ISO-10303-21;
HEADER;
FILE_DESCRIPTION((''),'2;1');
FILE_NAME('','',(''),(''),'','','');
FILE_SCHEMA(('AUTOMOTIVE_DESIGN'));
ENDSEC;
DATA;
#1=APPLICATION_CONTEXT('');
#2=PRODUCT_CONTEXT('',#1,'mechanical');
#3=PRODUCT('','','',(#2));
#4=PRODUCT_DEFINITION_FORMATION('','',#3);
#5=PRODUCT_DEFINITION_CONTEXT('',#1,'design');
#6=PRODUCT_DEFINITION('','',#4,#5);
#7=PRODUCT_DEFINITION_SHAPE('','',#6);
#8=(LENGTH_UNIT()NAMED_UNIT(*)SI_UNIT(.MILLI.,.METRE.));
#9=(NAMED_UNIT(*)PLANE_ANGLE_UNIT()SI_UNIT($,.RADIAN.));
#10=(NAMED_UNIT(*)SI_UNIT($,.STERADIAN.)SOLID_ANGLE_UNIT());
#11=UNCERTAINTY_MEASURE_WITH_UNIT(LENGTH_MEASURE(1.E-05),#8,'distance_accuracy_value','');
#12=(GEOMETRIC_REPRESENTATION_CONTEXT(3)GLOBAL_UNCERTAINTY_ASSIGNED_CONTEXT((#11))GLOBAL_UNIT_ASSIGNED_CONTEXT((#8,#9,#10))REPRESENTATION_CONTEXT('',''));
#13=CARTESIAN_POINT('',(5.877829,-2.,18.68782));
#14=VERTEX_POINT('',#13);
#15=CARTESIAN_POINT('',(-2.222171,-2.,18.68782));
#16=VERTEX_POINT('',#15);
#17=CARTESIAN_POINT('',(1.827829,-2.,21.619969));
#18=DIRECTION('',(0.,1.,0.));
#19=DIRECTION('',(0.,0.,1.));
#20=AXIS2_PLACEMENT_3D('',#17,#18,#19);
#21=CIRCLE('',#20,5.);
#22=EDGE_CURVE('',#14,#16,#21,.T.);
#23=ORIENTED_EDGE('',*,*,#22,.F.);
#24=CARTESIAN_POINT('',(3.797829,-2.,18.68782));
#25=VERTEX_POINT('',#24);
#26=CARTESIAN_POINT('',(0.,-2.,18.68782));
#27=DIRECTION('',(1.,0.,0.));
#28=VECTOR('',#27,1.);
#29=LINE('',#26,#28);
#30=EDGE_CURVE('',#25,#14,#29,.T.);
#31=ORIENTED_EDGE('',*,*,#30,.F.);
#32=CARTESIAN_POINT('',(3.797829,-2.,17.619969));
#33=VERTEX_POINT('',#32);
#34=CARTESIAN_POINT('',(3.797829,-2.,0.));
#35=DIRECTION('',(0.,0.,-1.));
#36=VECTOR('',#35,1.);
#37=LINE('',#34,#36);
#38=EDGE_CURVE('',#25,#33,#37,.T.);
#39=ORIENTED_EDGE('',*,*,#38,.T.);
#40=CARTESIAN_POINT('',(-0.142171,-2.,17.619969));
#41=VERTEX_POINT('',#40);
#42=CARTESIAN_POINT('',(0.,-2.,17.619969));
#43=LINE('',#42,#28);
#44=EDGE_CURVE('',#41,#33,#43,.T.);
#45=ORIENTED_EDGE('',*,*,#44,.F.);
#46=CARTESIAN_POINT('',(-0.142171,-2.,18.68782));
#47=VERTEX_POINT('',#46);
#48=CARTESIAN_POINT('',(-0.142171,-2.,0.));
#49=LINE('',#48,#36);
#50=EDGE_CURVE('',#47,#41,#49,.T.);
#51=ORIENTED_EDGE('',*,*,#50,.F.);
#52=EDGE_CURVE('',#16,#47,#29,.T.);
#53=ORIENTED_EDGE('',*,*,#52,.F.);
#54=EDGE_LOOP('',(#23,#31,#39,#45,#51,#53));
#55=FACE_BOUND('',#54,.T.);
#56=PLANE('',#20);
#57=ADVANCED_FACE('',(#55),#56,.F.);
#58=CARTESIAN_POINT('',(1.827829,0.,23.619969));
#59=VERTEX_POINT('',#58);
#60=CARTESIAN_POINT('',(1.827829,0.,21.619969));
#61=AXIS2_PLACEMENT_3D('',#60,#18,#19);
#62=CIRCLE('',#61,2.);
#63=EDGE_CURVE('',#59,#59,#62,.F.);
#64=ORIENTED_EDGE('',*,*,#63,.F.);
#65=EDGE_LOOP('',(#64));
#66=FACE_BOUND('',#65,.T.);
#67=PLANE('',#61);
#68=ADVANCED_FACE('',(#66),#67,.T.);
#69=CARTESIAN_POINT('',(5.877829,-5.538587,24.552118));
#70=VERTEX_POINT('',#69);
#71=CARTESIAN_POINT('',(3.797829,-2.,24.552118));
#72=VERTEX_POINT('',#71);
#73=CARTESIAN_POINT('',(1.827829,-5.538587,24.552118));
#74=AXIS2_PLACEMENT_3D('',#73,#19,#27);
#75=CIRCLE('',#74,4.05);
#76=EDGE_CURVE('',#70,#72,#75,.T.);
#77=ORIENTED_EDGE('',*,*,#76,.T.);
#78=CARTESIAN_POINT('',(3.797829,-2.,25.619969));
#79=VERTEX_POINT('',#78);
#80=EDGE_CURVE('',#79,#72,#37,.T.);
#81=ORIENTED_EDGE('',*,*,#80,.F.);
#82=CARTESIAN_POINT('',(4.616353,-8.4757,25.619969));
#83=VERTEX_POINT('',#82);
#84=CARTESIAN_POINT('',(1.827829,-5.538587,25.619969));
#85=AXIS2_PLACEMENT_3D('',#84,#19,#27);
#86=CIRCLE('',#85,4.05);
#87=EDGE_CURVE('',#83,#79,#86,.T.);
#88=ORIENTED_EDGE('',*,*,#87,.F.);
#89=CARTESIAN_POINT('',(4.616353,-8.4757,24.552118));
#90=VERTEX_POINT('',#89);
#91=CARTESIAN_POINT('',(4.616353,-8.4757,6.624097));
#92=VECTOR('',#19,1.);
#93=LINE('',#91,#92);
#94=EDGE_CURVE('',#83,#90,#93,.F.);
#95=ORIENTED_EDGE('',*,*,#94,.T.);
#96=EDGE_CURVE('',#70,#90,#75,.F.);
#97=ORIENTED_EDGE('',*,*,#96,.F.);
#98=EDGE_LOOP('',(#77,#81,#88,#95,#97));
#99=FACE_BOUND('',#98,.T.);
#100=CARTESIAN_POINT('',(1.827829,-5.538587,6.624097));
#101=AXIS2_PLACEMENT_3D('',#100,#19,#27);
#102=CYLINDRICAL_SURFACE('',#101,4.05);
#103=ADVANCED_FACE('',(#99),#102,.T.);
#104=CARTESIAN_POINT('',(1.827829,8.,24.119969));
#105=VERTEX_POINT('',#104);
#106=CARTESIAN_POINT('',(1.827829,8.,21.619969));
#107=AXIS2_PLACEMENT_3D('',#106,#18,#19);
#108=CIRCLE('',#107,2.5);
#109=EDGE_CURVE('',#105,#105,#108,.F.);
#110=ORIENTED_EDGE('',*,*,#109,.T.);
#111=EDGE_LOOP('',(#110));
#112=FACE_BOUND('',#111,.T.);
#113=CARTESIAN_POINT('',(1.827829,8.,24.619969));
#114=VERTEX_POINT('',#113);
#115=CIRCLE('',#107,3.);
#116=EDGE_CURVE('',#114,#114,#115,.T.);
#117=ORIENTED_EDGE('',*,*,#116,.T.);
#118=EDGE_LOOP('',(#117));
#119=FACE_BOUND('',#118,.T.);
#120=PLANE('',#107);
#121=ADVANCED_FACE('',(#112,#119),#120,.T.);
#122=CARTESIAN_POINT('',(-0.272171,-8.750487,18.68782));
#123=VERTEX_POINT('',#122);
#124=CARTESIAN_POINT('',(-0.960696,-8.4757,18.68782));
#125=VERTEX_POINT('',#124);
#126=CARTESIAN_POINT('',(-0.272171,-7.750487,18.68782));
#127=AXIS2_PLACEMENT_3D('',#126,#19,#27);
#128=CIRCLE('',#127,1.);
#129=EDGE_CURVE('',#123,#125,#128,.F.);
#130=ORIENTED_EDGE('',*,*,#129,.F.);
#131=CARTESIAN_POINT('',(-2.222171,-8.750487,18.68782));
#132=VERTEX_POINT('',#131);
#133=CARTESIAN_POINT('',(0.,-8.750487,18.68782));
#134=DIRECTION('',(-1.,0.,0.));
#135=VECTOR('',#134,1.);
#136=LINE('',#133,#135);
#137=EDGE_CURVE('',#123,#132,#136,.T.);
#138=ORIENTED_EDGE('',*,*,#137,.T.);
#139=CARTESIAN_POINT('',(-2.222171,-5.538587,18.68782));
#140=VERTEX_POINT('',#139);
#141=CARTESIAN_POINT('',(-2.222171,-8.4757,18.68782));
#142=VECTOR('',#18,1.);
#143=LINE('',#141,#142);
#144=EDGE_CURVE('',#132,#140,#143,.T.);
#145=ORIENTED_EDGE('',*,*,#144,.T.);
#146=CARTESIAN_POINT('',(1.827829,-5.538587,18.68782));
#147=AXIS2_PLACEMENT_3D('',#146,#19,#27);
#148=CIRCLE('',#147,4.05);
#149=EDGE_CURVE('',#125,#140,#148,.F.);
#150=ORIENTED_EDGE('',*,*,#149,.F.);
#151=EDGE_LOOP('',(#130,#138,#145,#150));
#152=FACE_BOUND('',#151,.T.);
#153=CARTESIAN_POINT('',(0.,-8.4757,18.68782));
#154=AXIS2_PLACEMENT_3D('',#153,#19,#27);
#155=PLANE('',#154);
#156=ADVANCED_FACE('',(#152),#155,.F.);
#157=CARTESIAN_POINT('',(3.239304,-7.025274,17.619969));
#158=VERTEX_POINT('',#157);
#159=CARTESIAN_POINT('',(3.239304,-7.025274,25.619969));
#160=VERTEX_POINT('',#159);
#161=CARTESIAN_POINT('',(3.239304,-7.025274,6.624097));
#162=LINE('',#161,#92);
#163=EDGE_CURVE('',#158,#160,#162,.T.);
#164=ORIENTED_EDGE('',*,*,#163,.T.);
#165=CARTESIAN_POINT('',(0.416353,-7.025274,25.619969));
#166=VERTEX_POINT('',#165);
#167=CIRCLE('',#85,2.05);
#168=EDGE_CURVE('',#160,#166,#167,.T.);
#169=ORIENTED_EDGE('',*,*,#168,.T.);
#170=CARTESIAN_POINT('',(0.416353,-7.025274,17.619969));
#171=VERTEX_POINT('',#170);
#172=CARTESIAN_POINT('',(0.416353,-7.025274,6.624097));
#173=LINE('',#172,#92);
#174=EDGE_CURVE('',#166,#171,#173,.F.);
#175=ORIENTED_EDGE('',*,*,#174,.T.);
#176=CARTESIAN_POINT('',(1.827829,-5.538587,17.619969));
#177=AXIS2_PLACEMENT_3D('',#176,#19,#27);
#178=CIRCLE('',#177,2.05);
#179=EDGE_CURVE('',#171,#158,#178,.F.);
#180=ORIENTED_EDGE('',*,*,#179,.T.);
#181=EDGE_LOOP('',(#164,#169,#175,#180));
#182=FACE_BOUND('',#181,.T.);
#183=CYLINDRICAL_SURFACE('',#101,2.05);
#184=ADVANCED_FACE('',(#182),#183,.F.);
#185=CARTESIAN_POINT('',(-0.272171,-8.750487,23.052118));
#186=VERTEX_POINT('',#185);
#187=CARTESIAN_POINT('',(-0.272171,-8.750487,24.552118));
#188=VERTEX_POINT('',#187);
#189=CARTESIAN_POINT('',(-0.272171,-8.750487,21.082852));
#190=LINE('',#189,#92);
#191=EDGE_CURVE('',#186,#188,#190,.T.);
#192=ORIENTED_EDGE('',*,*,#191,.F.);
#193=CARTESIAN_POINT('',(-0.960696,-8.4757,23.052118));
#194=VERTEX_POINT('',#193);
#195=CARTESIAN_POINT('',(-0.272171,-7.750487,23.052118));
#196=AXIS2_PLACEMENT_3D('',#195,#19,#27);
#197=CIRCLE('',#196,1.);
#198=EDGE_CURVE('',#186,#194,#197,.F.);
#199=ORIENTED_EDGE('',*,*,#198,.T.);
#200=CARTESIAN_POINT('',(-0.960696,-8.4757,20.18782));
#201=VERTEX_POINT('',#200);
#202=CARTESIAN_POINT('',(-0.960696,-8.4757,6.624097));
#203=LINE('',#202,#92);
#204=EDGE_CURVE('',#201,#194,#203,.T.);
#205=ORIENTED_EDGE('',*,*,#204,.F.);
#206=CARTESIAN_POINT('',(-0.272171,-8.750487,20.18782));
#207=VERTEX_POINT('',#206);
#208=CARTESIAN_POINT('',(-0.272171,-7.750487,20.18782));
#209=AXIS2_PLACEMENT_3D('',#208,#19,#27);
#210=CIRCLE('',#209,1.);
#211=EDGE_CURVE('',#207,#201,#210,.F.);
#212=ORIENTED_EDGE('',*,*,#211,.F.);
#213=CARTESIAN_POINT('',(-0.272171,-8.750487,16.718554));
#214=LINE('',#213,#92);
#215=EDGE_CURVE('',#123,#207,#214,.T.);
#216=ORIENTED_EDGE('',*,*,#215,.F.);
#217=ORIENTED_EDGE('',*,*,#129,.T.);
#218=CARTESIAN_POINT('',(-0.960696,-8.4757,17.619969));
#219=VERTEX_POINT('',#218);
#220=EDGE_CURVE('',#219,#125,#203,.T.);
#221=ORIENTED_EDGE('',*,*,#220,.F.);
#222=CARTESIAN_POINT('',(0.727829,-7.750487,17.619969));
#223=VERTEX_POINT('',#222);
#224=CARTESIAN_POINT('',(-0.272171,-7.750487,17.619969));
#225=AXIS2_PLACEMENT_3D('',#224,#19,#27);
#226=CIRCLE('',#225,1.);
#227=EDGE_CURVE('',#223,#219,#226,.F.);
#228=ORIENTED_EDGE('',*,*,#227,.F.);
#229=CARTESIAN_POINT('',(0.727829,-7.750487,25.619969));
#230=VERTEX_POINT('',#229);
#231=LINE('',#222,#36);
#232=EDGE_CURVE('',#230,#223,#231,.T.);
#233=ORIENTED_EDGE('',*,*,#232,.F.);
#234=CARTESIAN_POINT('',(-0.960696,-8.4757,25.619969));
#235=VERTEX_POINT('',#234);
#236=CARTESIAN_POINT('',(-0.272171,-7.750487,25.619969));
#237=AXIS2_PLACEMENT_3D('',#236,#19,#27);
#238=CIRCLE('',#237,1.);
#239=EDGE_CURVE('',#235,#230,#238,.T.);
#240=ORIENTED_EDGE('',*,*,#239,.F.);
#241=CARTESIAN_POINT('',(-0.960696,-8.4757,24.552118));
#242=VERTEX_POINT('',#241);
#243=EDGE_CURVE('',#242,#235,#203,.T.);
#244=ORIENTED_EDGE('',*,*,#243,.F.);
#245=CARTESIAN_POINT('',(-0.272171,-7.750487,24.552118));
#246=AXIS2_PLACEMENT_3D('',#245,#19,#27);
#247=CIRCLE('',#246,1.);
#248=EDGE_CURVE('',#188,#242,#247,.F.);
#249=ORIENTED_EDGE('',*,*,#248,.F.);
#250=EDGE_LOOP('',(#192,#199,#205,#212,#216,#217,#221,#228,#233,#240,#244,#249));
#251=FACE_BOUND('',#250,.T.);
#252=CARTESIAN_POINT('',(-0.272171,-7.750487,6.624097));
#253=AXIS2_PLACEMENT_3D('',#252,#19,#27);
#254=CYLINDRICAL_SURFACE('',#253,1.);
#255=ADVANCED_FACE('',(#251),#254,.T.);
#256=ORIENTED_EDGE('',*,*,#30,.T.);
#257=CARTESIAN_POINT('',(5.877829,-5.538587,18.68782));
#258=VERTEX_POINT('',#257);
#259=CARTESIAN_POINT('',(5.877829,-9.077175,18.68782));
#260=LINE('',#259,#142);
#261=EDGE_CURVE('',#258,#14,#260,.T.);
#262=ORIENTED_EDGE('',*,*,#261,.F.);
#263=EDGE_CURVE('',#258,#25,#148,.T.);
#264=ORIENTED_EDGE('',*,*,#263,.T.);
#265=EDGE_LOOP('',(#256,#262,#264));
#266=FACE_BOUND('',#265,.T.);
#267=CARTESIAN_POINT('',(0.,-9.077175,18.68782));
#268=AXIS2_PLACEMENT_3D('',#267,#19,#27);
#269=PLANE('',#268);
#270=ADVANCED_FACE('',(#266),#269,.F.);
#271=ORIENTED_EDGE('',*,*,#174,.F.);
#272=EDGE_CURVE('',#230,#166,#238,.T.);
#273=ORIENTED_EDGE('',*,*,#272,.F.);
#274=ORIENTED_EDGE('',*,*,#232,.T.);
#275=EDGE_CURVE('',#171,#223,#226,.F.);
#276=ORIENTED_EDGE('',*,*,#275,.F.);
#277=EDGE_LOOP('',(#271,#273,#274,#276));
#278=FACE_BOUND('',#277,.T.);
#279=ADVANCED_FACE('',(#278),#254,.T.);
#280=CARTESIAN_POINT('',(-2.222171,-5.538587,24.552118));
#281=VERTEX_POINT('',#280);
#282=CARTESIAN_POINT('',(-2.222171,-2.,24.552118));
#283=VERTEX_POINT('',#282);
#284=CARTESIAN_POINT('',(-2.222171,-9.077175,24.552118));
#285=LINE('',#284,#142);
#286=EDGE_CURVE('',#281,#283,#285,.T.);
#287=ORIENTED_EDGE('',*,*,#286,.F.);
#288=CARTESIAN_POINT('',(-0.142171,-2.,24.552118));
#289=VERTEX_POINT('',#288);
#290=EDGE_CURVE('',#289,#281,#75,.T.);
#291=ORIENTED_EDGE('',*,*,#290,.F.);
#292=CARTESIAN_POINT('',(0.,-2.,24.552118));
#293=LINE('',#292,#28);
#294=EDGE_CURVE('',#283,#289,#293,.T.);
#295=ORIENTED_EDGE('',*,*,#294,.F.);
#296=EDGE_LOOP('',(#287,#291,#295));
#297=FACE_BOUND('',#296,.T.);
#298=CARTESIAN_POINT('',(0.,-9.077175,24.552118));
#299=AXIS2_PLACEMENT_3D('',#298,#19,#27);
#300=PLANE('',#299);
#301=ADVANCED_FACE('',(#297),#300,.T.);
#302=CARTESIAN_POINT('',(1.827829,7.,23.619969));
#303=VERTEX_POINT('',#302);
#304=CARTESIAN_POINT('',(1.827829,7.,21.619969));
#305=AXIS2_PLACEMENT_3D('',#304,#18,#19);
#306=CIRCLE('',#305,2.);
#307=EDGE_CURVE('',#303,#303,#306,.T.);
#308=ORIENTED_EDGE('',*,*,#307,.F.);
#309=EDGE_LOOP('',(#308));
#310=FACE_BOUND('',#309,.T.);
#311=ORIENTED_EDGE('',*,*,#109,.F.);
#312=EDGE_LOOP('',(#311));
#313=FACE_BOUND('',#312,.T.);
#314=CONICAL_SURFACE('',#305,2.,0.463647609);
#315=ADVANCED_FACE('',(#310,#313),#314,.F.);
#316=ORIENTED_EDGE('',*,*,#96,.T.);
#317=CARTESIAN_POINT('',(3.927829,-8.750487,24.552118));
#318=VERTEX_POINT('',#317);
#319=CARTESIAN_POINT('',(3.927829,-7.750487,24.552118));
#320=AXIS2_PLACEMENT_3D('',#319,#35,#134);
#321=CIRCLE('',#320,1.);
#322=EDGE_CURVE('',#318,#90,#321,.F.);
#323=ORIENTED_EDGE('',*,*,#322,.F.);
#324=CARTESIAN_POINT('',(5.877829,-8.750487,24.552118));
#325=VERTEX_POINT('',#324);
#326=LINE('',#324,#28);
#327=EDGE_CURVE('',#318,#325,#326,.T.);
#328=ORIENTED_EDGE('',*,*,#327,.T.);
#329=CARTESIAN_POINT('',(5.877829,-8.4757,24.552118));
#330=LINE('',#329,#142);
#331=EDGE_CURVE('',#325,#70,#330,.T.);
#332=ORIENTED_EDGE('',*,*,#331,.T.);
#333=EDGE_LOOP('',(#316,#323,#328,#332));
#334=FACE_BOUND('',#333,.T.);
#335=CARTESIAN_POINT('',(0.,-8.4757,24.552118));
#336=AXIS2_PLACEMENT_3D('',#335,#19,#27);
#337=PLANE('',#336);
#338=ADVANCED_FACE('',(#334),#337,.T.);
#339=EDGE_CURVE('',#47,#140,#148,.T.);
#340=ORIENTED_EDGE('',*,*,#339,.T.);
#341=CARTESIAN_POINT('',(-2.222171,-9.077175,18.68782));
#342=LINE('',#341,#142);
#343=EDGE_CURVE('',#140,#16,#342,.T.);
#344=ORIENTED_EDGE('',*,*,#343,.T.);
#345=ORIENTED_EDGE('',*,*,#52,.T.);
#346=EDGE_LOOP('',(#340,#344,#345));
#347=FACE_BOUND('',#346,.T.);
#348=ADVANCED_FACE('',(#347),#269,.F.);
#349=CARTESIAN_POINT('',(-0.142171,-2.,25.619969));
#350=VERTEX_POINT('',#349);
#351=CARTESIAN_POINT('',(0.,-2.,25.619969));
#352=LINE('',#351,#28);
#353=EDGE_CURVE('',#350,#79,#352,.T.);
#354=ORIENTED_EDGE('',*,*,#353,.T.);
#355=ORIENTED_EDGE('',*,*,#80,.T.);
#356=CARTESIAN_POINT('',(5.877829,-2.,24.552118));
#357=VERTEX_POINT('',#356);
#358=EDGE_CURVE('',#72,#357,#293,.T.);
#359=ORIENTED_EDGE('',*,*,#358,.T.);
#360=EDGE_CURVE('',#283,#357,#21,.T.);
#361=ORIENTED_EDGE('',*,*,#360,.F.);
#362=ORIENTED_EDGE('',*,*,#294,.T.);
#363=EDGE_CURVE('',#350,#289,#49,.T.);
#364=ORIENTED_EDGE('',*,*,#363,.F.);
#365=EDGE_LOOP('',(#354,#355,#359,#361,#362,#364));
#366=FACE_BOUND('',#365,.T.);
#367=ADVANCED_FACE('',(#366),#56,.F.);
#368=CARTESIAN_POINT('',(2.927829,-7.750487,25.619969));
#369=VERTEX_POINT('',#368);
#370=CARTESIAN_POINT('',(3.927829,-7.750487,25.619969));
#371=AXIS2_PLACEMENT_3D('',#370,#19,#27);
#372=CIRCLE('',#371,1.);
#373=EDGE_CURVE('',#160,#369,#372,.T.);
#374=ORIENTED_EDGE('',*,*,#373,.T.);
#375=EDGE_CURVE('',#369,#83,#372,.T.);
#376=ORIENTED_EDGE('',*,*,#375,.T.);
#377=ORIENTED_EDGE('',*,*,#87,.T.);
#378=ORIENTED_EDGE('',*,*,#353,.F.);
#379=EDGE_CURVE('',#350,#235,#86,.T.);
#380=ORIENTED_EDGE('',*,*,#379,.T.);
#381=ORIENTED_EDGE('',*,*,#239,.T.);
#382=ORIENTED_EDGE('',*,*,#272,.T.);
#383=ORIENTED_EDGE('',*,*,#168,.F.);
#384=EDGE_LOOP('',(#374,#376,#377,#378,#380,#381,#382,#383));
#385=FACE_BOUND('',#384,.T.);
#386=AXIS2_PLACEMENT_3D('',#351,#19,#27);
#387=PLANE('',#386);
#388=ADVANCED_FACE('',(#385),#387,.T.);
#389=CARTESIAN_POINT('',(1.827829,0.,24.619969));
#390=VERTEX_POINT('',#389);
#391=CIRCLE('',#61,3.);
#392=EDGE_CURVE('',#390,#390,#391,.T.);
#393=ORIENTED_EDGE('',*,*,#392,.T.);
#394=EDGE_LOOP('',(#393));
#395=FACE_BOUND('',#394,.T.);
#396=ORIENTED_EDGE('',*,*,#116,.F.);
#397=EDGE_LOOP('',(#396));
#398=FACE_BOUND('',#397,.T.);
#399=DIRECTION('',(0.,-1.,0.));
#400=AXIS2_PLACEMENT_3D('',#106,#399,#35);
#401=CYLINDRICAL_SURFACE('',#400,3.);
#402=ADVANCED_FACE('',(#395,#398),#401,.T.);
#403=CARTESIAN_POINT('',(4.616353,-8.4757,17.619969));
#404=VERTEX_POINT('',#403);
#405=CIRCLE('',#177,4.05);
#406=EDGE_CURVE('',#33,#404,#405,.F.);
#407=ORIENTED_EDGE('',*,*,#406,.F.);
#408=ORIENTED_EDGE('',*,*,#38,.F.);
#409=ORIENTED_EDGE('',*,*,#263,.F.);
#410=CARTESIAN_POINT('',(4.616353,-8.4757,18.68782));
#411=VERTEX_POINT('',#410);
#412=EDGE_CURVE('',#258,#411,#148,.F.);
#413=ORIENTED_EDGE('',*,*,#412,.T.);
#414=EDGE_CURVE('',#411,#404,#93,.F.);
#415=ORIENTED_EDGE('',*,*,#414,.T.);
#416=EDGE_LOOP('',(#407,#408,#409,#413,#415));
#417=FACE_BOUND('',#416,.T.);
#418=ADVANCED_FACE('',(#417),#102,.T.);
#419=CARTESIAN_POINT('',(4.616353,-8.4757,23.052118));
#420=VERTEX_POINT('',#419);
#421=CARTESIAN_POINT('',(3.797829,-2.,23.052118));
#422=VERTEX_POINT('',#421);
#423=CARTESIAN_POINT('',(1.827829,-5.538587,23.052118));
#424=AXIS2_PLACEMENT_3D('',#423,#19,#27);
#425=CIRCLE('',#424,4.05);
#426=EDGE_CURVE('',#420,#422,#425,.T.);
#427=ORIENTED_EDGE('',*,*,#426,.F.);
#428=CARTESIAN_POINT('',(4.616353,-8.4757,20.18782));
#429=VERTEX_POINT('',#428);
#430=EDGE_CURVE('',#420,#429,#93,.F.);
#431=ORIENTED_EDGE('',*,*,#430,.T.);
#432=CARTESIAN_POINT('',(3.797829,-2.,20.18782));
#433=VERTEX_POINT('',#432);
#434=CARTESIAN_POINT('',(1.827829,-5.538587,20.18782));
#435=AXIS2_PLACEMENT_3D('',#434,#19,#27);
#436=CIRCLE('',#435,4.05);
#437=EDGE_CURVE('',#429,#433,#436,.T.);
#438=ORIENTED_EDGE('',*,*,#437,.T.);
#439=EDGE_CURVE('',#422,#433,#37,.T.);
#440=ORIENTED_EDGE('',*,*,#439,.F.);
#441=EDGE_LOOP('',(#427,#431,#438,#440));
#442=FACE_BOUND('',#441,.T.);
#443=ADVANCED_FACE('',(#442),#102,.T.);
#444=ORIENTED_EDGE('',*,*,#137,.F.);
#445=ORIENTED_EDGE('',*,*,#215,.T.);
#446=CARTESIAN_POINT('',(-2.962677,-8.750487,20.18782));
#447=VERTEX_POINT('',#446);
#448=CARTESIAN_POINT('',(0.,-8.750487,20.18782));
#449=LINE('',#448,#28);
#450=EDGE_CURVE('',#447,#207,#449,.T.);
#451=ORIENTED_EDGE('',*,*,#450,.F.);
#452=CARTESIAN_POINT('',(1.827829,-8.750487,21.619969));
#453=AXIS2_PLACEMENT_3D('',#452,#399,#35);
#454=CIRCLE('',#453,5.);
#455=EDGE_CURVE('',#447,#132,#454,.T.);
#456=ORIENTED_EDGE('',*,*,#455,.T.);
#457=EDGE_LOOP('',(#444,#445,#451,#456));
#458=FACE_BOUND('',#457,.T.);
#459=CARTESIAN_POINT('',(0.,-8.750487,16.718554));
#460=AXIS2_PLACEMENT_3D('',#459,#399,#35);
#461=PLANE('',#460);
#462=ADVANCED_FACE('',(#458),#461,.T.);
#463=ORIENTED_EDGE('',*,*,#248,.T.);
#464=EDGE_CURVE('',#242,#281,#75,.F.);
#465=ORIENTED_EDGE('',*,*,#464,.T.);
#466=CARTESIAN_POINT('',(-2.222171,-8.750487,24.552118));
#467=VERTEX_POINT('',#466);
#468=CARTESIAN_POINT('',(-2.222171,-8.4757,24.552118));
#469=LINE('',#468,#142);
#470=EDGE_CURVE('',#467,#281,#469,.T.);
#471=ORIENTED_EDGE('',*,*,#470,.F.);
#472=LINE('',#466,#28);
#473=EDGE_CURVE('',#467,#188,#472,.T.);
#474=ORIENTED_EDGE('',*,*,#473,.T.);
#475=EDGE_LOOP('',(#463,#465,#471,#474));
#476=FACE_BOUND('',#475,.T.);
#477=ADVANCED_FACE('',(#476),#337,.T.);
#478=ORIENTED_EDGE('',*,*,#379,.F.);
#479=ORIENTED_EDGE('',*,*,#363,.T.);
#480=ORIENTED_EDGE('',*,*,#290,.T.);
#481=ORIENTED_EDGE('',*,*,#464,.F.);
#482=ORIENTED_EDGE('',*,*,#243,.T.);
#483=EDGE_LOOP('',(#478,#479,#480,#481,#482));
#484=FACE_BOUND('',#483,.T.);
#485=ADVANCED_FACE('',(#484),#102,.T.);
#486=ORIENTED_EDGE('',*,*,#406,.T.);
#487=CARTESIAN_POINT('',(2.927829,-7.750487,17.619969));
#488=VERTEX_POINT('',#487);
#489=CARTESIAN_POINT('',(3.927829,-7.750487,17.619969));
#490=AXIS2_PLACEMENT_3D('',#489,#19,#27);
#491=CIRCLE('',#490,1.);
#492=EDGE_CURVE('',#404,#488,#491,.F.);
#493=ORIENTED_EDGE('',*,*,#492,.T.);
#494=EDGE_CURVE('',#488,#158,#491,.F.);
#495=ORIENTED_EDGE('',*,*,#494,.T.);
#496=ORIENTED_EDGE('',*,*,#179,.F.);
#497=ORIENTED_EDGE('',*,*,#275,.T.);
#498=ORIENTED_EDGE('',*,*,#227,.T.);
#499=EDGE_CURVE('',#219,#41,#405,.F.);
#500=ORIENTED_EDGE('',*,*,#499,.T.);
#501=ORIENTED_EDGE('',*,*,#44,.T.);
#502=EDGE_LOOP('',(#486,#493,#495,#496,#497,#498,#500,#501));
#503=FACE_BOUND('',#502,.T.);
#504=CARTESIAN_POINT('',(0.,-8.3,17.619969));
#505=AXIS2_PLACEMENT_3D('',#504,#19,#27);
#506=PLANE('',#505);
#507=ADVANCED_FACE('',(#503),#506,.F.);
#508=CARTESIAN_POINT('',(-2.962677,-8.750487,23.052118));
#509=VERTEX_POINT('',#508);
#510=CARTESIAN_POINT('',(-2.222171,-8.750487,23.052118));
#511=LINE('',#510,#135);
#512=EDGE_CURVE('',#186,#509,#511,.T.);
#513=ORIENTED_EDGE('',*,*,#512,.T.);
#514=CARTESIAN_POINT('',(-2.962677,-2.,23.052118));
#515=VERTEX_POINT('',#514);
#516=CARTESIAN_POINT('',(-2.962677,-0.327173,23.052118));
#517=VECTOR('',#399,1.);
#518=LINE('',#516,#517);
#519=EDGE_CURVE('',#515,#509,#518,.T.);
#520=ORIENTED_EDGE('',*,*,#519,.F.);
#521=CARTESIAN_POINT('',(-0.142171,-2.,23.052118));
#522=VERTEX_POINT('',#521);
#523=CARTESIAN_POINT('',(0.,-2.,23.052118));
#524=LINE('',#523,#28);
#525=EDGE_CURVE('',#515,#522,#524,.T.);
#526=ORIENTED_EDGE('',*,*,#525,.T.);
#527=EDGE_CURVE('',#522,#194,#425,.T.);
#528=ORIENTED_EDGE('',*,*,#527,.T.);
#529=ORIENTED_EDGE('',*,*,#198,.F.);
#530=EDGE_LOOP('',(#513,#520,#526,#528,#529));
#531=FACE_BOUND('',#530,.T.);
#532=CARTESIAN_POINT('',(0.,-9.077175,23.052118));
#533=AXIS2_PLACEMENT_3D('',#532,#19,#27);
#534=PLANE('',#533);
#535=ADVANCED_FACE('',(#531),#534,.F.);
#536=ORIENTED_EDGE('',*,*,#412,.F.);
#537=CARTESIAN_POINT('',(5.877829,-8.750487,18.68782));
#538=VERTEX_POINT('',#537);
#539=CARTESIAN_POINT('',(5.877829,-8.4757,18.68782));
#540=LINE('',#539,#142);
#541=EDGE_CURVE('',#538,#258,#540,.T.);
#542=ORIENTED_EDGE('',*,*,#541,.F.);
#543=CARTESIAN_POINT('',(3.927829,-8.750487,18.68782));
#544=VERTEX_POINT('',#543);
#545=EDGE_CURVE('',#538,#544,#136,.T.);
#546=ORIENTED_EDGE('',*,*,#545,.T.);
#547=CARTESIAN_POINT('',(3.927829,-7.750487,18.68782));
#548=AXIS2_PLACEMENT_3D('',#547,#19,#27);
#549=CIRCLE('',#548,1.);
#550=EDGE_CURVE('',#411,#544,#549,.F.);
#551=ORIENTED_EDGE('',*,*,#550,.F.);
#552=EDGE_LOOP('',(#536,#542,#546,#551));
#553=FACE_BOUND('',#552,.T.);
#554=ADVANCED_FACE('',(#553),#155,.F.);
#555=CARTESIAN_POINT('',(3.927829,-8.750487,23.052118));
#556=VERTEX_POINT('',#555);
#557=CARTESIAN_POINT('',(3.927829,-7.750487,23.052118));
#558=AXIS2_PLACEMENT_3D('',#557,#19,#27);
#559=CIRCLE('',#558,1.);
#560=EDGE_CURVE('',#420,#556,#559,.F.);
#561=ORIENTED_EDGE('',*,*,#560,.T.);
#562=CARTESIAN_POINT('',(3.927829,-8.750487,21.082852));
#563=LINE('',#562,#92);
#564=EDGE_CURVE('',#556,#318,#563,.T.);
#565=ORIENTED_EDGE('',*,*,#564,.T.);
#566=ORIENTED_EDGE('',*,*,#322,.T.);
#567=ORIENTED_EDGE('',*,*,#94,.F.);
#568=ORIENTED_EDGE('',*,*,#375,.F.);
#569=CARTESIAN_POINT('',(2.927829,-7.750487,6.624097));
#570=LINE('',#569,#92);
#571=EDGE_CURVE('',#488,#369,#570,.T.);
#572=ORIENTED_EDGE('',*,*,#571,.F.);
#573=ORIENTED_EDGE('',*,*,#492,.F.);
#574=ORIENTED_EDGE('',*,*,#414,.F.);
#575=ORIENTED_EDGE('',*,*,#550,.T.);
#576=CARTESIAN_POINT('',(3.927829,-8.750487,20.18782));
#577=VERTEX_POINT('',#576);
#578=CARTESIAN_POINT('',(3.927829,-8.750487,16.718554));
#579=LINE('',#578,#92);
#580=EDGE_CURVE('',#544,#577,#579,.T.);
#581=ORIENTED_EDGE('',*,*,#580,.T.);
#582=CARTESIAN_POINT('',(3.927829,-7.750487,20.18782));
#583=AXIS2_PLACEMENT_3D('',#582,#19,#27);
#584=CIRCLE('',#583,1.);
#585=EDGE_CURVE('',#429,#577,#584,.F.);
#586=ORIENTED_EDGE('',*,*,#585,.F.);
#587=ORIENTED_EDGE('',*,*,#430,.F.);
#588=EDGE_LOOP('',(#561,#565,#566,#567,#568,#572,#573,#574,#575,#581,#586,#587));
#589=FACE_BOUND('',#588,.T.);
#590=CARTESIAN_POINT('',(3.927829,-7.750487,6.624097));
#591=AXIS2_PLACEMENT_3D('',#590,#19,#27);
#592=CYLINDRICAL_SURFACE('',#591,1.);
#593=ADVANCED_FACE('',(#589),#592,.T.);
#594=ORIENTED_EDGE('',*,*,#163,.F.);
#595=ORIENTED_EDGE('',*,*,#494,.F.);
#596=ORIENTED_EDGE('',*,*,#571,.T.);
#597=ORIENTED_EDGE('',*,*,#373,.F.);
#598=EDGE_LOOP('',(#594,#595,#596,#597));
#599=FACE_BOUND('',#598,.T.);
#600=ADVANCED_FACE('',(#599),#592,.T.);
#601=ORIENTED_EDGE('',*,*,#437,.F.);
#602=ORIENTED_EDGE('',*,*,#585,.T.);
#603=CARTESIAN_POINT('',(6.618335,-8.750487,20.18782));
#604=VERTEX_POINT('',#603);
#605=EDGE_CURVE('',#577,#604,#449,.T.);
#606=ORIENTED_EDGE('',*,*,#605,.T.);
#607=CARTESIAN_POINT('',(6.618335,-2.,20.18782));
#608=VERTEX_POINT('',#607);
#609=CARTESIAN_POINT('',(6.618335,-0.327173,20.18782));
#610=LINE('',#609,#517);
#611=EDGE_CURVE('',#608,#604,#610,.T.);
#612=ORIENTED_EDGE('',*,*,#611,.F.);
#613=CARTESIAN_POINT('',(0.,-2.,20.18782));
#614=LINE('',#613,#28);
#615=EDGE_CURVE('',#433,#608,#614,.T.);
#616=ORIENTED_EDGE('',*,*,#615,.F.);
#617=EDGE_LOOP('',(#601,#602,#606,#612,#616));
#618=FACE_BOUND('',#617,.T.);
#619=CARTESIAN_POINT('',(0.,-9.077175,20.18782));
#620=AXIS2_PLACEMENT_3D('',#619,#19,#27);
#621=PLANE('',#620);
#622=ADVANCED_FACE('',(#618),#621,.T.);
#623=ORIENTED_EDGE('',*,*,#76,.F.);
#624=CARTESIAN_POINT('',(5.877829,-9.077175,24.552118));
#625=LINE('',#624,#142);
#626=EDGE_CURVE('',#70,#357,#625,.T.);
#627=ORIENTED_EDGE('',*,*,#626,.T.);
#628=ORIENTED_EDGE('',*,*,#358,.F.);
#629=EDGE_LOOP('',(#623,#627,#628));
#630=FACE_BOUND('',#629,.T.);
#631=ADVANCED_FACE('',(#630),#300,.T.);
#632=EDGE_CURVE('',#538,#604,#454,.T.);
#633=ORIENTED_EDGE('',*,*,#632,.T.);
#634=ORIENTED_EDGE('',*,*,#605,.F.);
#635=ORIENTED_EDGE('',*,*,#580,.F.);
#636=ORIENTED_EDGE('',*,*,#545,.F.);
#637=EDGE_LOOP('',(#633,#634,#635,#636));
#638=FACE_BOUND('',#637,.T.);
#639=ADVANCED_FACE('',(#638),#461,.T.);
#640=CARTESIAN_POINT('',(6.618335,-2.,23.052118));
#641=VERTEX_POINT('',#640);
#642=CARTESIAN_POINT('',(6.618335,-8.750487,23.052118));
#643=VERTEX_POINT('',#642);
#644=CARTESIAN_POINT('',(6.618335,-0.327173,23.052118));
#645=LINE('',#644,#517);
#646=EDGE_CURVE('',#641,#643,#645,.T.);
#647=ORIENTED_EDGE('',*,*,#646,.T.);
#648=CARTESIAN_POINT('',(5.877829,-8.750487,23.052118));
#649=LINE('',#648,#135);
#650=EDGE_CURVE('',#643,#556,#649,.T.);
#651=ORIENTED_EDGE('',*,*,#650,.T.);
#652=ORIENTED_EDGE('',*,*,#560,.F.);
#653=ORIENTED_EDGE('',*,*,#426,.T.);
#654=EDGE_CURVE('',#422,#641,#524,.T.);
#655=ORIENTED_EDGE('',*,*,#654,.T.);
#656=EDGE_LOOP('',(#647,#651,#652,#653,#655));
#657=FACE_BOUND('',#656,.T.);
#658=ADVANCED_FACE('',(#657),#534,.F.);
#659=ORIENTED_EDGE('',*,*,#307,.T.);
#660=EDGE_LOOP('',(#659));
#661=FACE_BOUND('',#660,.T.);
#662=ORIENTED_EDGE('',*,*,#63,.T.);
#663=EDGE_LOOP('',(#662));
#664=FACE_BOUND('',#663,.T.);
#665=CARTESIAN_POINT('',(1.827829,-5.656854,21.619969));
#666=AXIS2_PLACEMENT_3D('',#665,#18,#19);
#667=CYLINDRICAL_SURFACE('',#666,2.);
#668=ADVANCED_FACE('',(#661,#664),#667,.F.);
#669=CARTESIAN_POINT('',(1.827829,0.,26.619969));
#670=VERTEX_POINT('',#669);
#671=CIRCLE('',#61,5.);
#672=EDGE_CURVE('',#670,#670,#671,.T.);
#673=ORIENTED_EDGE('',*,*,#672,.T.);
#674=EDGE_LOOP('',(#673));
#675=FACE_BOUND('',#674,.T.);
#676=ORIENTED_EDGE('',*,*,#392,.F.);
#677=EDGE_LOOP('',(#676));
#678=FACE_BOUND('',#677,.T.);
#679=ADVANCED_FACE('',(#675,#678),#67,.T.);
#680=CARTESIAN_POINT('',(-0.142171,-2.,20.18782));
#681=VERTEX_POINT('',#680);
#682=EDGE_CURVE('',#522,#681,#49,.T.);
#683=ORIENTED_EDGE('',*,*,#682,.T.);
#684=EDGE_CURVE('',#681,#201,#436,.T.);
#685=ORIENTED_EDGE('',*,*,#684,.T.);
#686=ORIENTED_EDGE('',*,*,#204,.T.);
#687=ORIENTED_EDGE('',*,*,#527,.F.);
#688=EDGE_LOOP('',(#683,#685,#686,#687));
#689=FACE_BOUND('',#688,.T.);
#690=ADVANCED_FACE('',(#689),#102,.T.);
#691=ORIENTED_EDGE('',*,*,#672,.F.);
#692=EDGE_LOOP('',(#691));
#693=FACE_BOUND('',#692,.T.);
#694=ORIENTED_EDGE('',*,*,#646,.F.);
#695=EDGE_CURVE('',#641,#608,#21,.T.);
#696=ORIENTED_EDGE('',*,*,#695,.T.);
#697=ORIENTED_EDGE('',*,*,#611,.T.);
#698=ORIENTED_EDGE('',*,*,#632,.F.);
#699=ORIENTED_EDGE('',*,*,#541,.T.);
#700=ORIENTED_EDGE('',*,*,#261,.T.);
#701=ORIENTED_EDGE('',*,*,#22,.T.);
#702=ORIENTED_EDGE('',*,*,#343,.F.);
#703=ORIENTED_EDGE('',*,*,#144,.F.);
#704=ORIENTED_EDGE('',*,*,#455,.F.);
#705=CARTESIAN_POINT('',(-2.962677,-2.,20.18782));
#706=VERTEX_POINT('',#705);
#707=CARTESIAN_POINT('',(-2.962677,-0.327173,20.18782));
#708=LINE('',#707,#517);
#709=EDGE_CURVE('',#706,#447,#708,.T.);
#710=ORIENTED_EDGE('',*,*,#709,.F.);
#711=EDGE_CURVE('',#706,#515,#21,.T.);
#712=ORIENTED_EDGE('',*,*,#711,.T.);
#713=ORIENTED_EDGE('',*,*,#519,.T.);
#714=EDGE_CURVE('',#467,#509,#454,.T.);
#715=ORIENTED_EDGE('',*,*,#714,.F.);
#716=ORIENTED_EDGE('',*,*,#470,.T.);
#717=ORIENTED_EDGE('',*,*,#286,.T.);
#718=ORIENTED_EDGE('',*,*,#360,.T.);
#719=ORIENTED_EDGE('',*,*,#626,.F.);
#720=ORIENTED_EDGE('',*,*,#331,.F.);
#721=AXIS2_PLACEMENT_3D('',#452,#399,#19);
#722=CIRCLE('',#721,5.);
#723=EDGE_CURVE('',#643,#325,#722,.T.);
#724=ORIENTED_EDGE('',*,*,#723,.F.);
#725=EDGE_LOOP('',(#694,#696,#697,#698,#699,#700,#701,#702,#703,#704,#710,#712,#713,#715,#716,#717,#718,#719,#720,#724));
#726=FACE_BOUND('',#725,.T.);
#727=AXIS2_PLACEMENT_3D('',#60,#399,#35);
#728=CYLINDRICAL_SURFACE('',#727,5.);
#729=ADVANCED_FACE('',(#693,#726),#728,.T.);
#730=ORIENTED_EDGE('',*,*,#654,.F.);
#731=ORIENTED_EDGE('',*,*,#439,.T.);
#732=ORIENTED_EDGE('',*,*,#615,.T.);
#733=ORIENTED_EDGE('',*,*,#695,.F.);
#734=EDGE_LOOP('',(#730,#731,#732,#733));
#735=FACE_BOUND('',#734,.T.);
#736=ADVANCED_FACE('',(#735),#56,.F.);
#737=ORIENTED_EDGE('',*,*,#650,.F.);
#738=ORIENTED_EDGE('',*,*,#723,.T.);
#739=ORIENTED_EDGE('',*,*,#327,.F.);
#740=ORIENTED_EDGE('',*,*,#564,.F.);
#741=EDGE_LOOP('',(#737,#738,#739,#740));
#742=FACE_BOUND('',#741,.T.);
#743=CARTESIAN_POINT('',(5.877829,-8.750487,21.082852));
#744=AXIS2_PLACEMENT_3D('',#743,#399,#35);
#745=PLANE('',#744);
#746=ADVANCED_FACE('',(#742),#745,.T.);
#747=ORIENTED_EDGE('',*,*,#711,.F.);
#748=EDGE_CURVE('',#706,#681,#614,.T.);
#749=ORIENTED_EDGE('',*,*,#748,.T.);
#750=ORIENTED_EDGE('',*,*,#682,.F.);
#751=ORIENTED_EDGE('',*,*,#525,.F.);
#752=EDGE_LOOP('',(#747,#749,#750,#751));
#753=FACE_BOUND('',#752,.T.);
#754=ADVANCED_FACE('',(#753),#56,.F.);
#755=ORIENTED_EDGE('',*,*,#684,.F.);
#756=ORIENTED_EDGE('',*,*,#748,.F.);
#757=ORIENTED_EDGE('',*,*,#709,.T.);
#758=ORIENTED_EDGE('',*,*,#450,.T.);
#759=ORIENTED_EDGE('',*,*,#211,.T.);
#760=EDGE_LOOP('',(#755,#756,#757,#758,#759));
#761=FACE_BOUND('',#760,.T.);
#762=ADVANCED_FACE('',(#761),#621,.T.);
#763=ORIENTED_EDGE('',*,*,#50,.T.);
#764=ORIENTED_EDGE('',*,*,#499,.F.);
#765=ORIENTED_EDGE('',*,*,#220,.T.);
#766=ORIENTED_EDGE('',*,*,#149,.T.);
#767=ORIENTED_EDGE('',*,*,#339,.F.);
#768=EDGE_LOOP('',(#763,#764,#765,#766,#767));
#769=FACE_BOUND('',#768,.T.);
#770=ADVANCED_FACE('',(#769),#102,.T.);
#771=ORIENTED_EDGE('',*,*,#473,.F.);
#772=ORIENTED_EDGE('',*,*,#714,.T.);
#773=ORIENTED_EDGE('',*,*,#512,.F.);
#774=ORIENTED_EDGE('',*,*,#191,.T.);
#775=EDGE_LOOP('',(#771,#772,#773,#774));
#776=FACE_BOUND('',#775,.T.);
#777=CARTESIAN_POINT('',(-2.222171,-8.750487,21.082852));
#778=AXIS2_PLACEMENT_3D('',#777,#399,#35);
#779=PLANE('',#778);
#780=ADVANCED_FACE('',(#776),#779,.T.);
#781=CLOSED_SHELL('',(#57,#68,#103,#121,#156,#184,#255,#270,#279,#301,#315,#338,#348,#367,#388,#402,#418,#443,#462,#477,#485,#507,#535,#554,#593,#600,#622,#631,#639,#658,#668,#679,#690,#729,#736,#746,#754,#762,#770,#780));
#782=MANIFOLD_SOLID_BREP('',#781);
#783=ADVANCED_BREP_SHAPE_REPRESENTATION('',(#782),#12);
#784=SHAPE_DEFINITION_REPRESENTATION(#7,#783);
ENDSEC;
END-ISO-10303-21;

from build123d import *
from build123d.topology import SkipClean

# Parameters (mm, degrees)
BOSS_EXTRUDE9_DEPTH       = 5.6
BOSS_EXTRUDE9_DEPTH_BACK  = 2
SKETCH16_W                = 8
SKETCH16_H                = 3.5
BOSS_EXTRUDE11_DEPTH      = 8
CHAMFER2_SIZE             = 1.5
SKETCH17_W                = 3.94
SKETCH17_H                = 8
BOSS_EXTRUDE12_DEPTH      = 6.3
CUT_EXTRUDE2_START        = -5.6
CUT_EXTRUDE2_DEPTH        = 3.6
SKETCH21_R                = 1.5
BOSS_EXTRUDE14_DEPTH      = 3.6
CHAMFER4_SIZE             = 1
CUT_EXTRUDE3_DEPTH        = 3.6
SPLIT1_START              = -2
SPLIT1_DEPTH              = 7.6
SKETCH22_R                = 5
BOSS_EXTRUDE15_DEPTH      = 2
SKETCH23_R                = 3
BOSS_EXTRUDE16_DEPTH      = 8
CUT_EXTRUDE4_DEPTH        = 32.952026383
CUT_EXTRUDE4_DEPTH_BACK   = 8
SKETCH24_R                = 2
CHAMFER5_SIZE             = 0.5
CHAMFER5_SIZE2            = 1
BOSS_EXTRUDE17_DEPTH      = 8
CUT_EXTRUDE6_DEPTH        = 15.719504629
CUT_EXTRUDE6_DEPTH_BACK   = 15.719504629
FILLET2_R                 = 1
BOSS_EXTRUDE18_REACH      = 31.245
BOSS_EXTRUDE18_END_RADIUS = 4.05
SKETCH27_W                = 2.08
SKETCH27_H                = 1.5
BOSS_EXTRUDE19_START      = 3.538587
SKETCH27_3_W              = 2.08
SKETCH27_3_H              = 1.5
BOSS_EXTRUDE19_DEPTH      = 2.937113
CUT_EXTRUDE7_DEPTH        = 15.289597343
CUT_EXTRUDE7_DEPTH_BACK   = 15.289597343
SKETCH29_W                = 1.95
SKETCH29_H                = 0.274787005
BOSS_EXTRUDE20_DEPTH      = 1.5
BOSS_EXTRUDE21_START      = -4.364299
SKETCH29_3_W              = 1.95
SKETCH29_3_H              = 0.274787005
BOSS_EXTRUDE21_DEPTH      = 1.5
BOSS_EXTRUDE22_DEPTH      = 6.750486925


# Read off the part's stored shape, not the designer's step: Split1
# Some blends are built 0.0001 mm under size
with BuildPart() as part:
    # Sketch14 → Boss-Extrude9 (new, two sides: drawn at the far end of the back side and taken through both)
    with BuildSketch(Plane(origin=(0, 0, 0), x_dir=(1, 0, 0), z_dir=(0, 1, 0)).offset(-BOSS_EXTRUDE9_DEPTH_BACK)):
        with BuildLine():
            Line((-4.172171186, -20.619968889), (-4.172171186, -25.619968889))
            Line((-4.172171186, -25.619968889), (7.827828814, -25.619968889))
            Line((7.827828814, -25.619968889), (7.827828814, -20.619968889))
            ThreePointArc((7.827828814, -20.619968889), (1.827828814, -14.619968889), (-4.172171186, -20.619968889))
        make_face()
    extrude(amount=BOSS_EXTRUDE9_DEPTH + BOSS_EXTRUDE9_DEPTH_BACK)

    # Sketch16 → Boss-Extrude11 (add)
    with BuildSketch(Plane.XY.offset(25.619968889)):
        with Locations((1.827828814, 1.75)):
            Rectangle(SKETCH16_W, SKETCH16_H)
    extrude(amount=BOSS_EXTRUDE11_DEPTH)

    # Chamfer2
    chamfer2_edges = [part.edges().sort_by_distance(p)[0] for p in [
        (1.827828814, -2, 14.619968889),
        (7.827828814, 5.6, 23.119968889),
        (1.827828814, 5.6, 14.619968889),
        (-4.172171186, -2, 23.119968889),
        (-4.172171186, 5.6, 23.119968889),
        (7.827828814, -2, 23.119968889),
    ]]
    chamfer(chamfer2_edges, length=CHAMFER2_SIZE)

    # Sketch17 → Boss-Extrude12 (add)
    with BuildSketch(Plane.XZ.offset(2)):
        with Locations((1.827828814, 21.619968889)):
            Rectangle(SKETCH17_W, SKETCH17_H)
    extrude(amount=BOSS_EXTRUDE12_DEPTH)

    # Sketch20 → Cut-Extrude2 (cut)
    with BuildSketch(Plane(origin=(0, 5.6, 0), x_dir=(1, 0, 0), z_dir=(0, 1, 0)).offset(CUT_EXTRUDE2_START)):
        with BuildLine():
            Line((7.827828814, -20.619968889), (-4.172171186, -20.619968889))
            ThreePointArc((-4.172171186, -20.619968889), (1.827828814, -14.619968889), (7.827828814, -20.619968889))
        make_face()
    extrude(amount=CUT_EXTRUDE2_DEPTH, mode=Mode.SUBTRACT)

    # Sketch21 → Boss-Extrude14 (add)
    with BuildSketch(Plane(origin=(0, 0, 0), x_dir=(1, 0, 0), z_dir=(0, 1, 0))):
        with BuildLine():
            ThreePointArc((7.827828814, -20.619968889), (7.63955943, -19.128732072), (7.086566399, -17.731080001))
            ThreePointArc((7.086566399, -17.731080001), (6.279209969, -19.350325806), (4.990106474, -20.619968889))
            Line((4.990106474, -20.619968889), (7.827828814, -20.619968889))
        make_face()
        with BuildLine():
            ThreePointArc((-1.334448847, -20.619968889), (-2.623552342, -19.350325806), (-3.430908771, -17.731080001))
            ThreePointArc((-3.430908771, -17.731080001), (-3.983901803, -19.128732072), (-4.172171186, -20.619968889))
            Line((-4.172171186, -20.619968889), (-1.334448847, -20.619968889))
        make_face()
        with Locations(Location((1.827828814, -16.119968889, 0), (0, 0, 90.000763944))):
            Circle(SKETCH21_R)
    extrude(amount=BOSS_EXTRUDE14_DEPTH)

    # Chamfer4
    # the kernel refuses this chamfer: 1 mm, written as the material it adds along each edge
    with BuildSketch(Plane(origin=(1.827828814, 3.6, 16.119968889), x_dir=(-1.3333338100422289e-05, 0, -0.999999999911111), z_dir=(0.999999999911111, 0, -1.3333338100422289e-05))) as chamfer4_piece_1_section:
        Polygon((1.5, -CHAMFER4_SIZE), (1.5 + CHAMFER4_SIZE, 0), (1.5, 0), align=None)
    chamfer4_piece_1 = revolve(axis=Axis((1.827828814, 3.6, 16.119968889), (0, 1, 0)), mode=Mode.PRIVATE)
    chamfer4_piece_1 = chamfer4_piece_1 & Plane(origin=(1.827828814, 3.111670507, 20.619968889), x_dir=(1, 0, 0), z_dir=(0, -1, 0)) * Cylinder(6, 10, mode=Mode.PRIVATE)
    add(chamfer4_piece_1)
    with BuildSketch(Plane(origin=(1.827828814, 0, 16.119968889), x_dir=(-1.3333338100422289e-05, 0, -0.999999999911111), z_dir=(0.999999999911111, 0, -1.3333338100422289e-05))) as chamfer4_piece_2_section:
        Polygon((1.5 + CHAMFER4_SIZE, 0), (1.5, CHAMFER4_SIZE), (1.5, 0), align=None)
    chamfer4_piece_2 = revolve(axis=Axis((1.827828814, 0, 16.119968889), (0, 1, 0)), mode=Mode.PRIVATE)
    chamfer4_piece_2 = chamfer4_piece_2 & Plane(origin=(1.827828814, 0.488329493, 20.619968889), x_dir=(1, 0, 0), z_dir=(0, -1, 0)) * Cylinder(6, 10, mode=Mode.PRIVATE)
    add(chamfer4_piece_2)

    # Sketch21<3> → Cut-Extrude3 (cut)
    with BuildSketch(Plane(origin=(0, 0, 0), x_dir=(1, 0, 0), z_dir=(0, 1, 0))):
        with BuildLine():
            Line((4.990106474, -20.619968889), (-1.334448847, -20.619968889))
            ThreePointArc((-1.334448847, -20.619968889), (1.827828814, -21.619968889), (4.990106474, -20.619968889))
        make_face()
    extrude(amount=CUT_EXTRUDE3_DEPTH, mode=Mode.SUBTRACT)

    # Split1 outline → Split1 (cut)
    with BuildSketch(Plane(origin=(0, 0, 0), x_dir=(1, 0, 0), z_dir=(0, 1, 0)).offset(SPLIT1_START)):
        with BuildLine():
            Line((7.827828814, -25.619968889), (7.827828814, -20.619968889))
            ThreePointArc((7.827828814, -20.619968889), (1.827828814, -14.619968889), (-4.172171186, -20.619968889))
            Line((-4.172171186, -20.619968889), (-4.172171186, -25.619968889))
            Line((-4.172171186, -25.619968889), (-2.172171186, -25.619968889))
            Line((-2.172171186, -25.619968889), (-2.172171186, -33.619968889))
            Line((-2.172171186, -33.619968889), (5.827828814, -33.619968889))
            Line((5.827828814, -33.619968889), (5.827828814, -25.619968889))
            Line((5.827828814, -25.619968889), (7.827828814, -25.619968889))
        make_face()
    extrude(amount=SPLIT1_DEPTH, mode=Mode.SUBTRACT)

    # Sketch22 → Boss-Extrude15 (add)
    with BuildSketch(Plane(origin=(0, -2, 0), x_dir=(1, 0, 0), z_dir=(0, 1, 0))):
        with Locations(Location((1.827828814, -21.619968889, 0), (0, 0, 270))):
            Circle(SKETCH22_R)
    extrude(amount=BOSS_EXTRUDE15_DEPTH)

    # Sketch23 → Boss-Extrude16 (add)
    with BuildSketch(Plane(origin=(0, 0, 0), x_dir=(1, 0, 0), z_dir=(0, 1, 0))):
        with Locations(Location((1.827828814, -21.619968889, 0), (0, 0, 270))):
            Circle(SKETCH23_R)
    extrude(amount=BOSS_EXTRUDE16_DEPTH)

    # Sketch24 → Cut-Extrude4 (cut, two sides: drawn at the far end of the back side and taken through both)
    with BuildSketch(Plane(origin=(0, 8, 0), x_dir=(1, 0, 0), z_dir=(0, 1, 0)).offset(-CUT_EXTRUDE4_DEPTH_BACK)):
        with Locations(Location((1.827828814, -21.619968889, 0), (0, 0, 270))):
            Circle(SKETCH24_R)
    extrude(amount=CUT_EXTRUDE4_DEPTH + CUT_EXTRUDE4_DEPTH_BACK, mode=Mode.SUBTRACT)

    # Chamfer5
    chamfer5_edges = [part.edges().sort_by_distance(p)[0] for p in [
        (1.827828814, 8, 19.619968889),
    ]]
    chamfer5_side = [part.faces().sort_by_distance(p)[0] for p in [
        (1.827828814, 8, 18.704821703),
    ]]
    chamfer(chamfer5_edges, length=CHAMFER5_SIZE, length2=CHAMFER5_SIZE2, reference=chamfer5_side[0])

    # Sketch25 → Boss-Extrude17 (add)
    with BuildSketch(Plane.XY.offset(25.619968889)):
        with BuildLine():
            Line((3.797828814, -8.3), (2.927828814, -8.3))
            Line((2.927828814, -8.3), (2.927828814, -9.436343053))
            ThreePointArc((2.927828814, -9.436343053), (5.057186335, -7.982712899), (5.877828814, -5.538587289))
            ThreePointArc((5.877828814, -5.538587289), (5.319318467, -3.486271524), (3.797828814, -2))
            Line((3.797828814, -2), (3.797828814, -4.971489414))
            ThreePointArc((3.797828814, -4.971489414), (3.857730289, -5.252230867), (3.877828814, -5.538587289))
            ThreePointArc((3.877828814, -5.538587289), (3.857730289, -5.82494371), (3.797828814, -6.105685164))
            Line((3.797828814, -6.105685164), (3.797828814, -8.3))
        make_face()
        with BuildLine():
            Line((0.727828814, -9.436343053), (0.727828814, -8.3))
            Line((0.727828814, -8.3), (-0.142171186, -8.3))
            Line((-0.142171186, -8.3), (-0.142171186, -6.105685164))
            ThreePointArc((-0.142171186, -6.105685164), (-0.222171186, -5.538587289), (-0.142171186, -4.971489414))
            Line((-0.142171186, -4.971489414), (-0.142171186, -2))
            ThreePointArc((-0.142171186, -2), (-2.194735605, -6.009199123), (0.727828814, -9.436343053))
        make_face()
        with BuildLine():
            Line((-0.142171186, -2), (-0.142171186, -4.971489414))
            ThreePointArc((-0.142171186, -4.971489414), (1.827828814, -3.488587289), (3.797828814, -4.971489414))
            Line((3.797828814, -4.971489414), (3.797828814, -2))
            Line((3.797828814, -2), (-0.142171186, -2))
        make_face()
        with BuildLine():
            ThreePointArc((3.797828814, -6.105685164), (3.469243788, -6.766698391), (2.927828814, -7.268471678))
            Line((2.927828814, -7.268471678), (2.927828814, -8.3))
            Line((2.927828814, -8.3), (3.797828814, -8.3))
            Line((3.797828814, -8.3), (3.797828814, -6.105685164))
        make_face()
        with BuildLine():
            Line((0.727828814, -8.3), (0.727828814, -7.268471678))
            ThreePointArc((0.727828814, -7.268471678), (0.186413839, -6.766698391), (-0.142171186, -6.105685164))
            Line((-0.142171186, -6.105685164), (-0.142171186, -8.3))
            Line((-0.142171186, -8.3), (0.727828814, -8.3))
        make_face()
    extrude(amount=-BOSS_EXTRUDE17_DEPTH)

    # Sketch25<3> → Cut-Extrude6 (cut, two sides: drawn at the far end of the back side and taken through both)
    with BuildSketch(Plane.XY.offset(25.619968889).offset(-CUT_EXTRUDE6_DEPTH_BACK)):
        with BuildLine():
            ThreePointArc((-0.142171186, -6.105685164), (0.186413839, -6.766698391), (0.727828814, -7.268471678))
            Line((0.727828814, -7.268471678), (0.727828814, -8.3))
            Line((0.727828814, -8.3), (2.927828814, -8.3))
            Line((2.927828814, -8.3), (2.927828814, -7.268471678))
            ThreePointArc((2.927828814, -7.268471678), (3.469243788, -6.766698391), (3.797828814, -6.105685164))
            Line((3.797828814, -6.105685164), (3.797828814, -4.971489414))
            ThreePointArc((3.797828814, -4.971489414), (1.827828814, -3.488587289), (-0.142171186, -4.971489414))
            Line((-0.142171186, -4.971489414), (-0.142171186, -6.105685164))
        make_face()
    extrude(amount=CUT_EXTRUDE6_DEPTH + CUT_EXTRUDE6_DEPTH_BACK, mode=Mode.SUBTRACT)

    # Fillet2
    fillet2_edges = [part.edges().sort_by_distance(p)[0] for p in [
        (0.727828814, -7.268471678, 21.619968889),
        (2.927828814, -7.268471678, 21.619968889),
        (2.927828814, -9.436343053, 21.619968889),
        (0.727828814, -9.436343053, 21.619968889),
    ]]
    fillet(fillet2_edges, radius=FILLET2_R - 0.0001)  # a hair under: the kernel refuses the full size

    # Boss-Extrude18: up to this cylinder (the profile starts outside it)
    boss_extrude18_end = Plane(origin=(1.827828814, -5.538587289, 21.619969), z_dir=(0, 0, 1)) * Cylinder(BOSS_EXTRUDE18_END_RADIUS, 75.954298, mode=Mode.PRIVATE)
    # Sketch27 → Boss-Extrude18 (add, up to the surface)
    with BuildSketch(Plane.XZ.offset(2), mode=Mode.PRIVATE) as boss_extrude18_sk1:
        with Locations((-1.182171186, 23.802118272)):
            Rectangle(SKETCH27_W, SKETCH27_H)
    boss_extrude18_tool1 = extrude(boss_extrude18_sk1.sketch, amount=BOSS_EXTRUDE18_REACH, mode=Mode.PRIVATE) - boss_extrude18_end
    add(boss_extrude18_tool1.solids().sort_by_distance((-1.182171, -2, 23.802118))[0])
    # Sketch27 → Boss-Extrude18 (add, up to the surface)
    with BuildSketch(Plane.XZ.offset(2), mode=Mode.PRIVATE) as boss_extrude18_sk2:
        with Locations((4.837828814, 23.802118272)):
            Rectangle(SKETCH27_W, SKETCH27_H)
    boss_extrude18_tool2 = extrude(boss_extrude18_sk2.sketch, amount=BOSS_EXTRUDE18_REACH, mode=Mode.PRIVATE) - boss_extrude18_end
    add(boss_extrude18_tool2.solids().sort_by_distance((4.837829, -2, 23.802118))[0])
    # Sketch27 → Boss-Extrude18 (add, up to the surface)
    with BuildSketch(Plane.XZ.offset(2), mode=Mode.PRIVATE) as boss_extrude18_sk3:
        with Locations((4.837828814, 19.437819507)):
            Rectangle(SKETCH27_W, SKETCH27_H)
    boss_extrude18_tool3 = extrude(boss_extrude18_sk3.sketch, amount=BOSS_EXTRUDE18_REACH, mode=Mode.PRIVATE) - boss_extrude18_end
    add(boss_extrude18_tool3.solids().sort_by_distance((4.837829, -2, 19.43782))[0])
    # Sketch27 → Boss-Extrude18 (add, up to the surface)
    with BuildSketch(Plane.XZ.offset(2), mode=Mode.PRIVATE) as boss_extrude18_sk4:
        with Locations((-1.182171186, 19.437819507)):
            Rectangle(SKETCH27_W, SKETCH27_H)
    boss_extrude18_tool4 = extrude(boss_extrude18_sk4.sketch, amount=BOSS_EXTRUDE18_REACH, mode=Mode.PRIVATE) - boss_extrude18_end
    add(boss_extrude18_tool4.solids().sort_by_distance((-1.182171, -2, 19.43782))[0])

    # Sketch27<3> → Boss-Extrude19 (add)
    with BuildSketch(Plane.XZ.offset(2).offset(BOSS_EXTRUDE19_START)):
        with Locations((-1.182171186, 19.437819507)):
            Rectangle(SKETCH27_3_W, SKETCH27_3_H)
        with Locations((4.837828814, 19.437819507)):
            Rectangle(SKETCH27_3_W, SKETCH27_3_H)
        with Locations((4.837828814, 23.802118272)):
            Rectangle(SKETCH27_3_W, SKETCH27_3_H)
        with Locations((-1.182171186, 23.802118272)):
            Rectangle(SKETCH27_3_W, SKETCH27_3_H)
    extrude(amount=BOSS_EXTRUDE19_DEPTH)

    # Sketch25<5> → Cut-Extrude7 (cut, two sides: drawn at the far end of the back side and taken through both)
    with SkipClean():  # the faces are left unmerged after this step: merging them gives an invalid solid
        with BuildSketch(Plane.XY.offset(25.619968889).offset(-CUT_EXTRUDE7_DEPTH_BACK)):
            with BuildLine():
                ThreePointArc((-0.142171186, -6.105685164), (0.186413839, -6.766698391), (0.727828814, -7.268471678))
                Line((0.727828814, -7.268471678), (2.927828814, -7.268471678))
                ThreePointArc((2.927828814, -7.268471678), (3.469243788, -6.766698391), (3.797828814, -6.105685164))
                Line((3.797828814, -6.105685164), (3.797828814, -4.971489414))
                ThreePointArc((3.797828814, -4.971489414), (1.827828814, -3.488587289), (-0.142171186, -4.971489414))
                Line((-0.142171186, -4.971489414), (-0.142171186, -6.105685164))
            make_face()
            with BuildLine():
                Line((3.797828814, -4.971489414), (3.797828814, -6.105685164))
                ThreePointArc((3.797828814, -6.105685164), (3.857730289, -5.82494371), (3.877828814, -5.538587289))
                ThreePointArc((3.877828814, -5.538587289), (3.857730289, -5.252230867), (3.797828814, -4.971489414))
            make_face()
            with BuildLine():
                ThreePointArc((-0.142171186, -4.971489414), (-0.222171186, -5.538587289), (-0.142171186, -6.105685164))
                Line((-0.142171186, -6.105685164), (-0.142171186, -4.971489414))
            make_face()
        extrude(amount=CUT_EXTRUDE7_DEPTH + CUT_EXTRUDE7_DEPTH_BACK, mode=Mode.SUBTRACT)

    # Sketch29 → Boss-Extrude20 (add)
    with SkipClean():  # the faces are left unmerged after this step: merging them gives an invalid solid
        with BuildSketch(Plane.XY.offset(24.552118272)):
            with Locations((-1.247171186, -8.613093423)):
                Rectangle(SKETCH29_W, SKETCH29_H)
            with Locations((4.902828814, -8.613093423)):
                Rectangle(SKETCH29_W, SKETCH29_H)
        extrude(amount=-BOSS_EXTRUDE20_DEPTH)

    # Sketch29<3> → Boss-Extrude21 (add)
    with SkipClean():  # the faces are left unmerged after this step: merging them gives an invalid solid
        with BuildSketch(Plane.XY.offset(24.552118272).offset(BOSS_EXTRUDE21_START)):
            with Locations((-1.247171186, -8.613093423)):
                Rectangle(SKETCH29_3_W, SKETCH29_3_H)
            with Locations((4.902828814, -8.613093423)):
                Rectangle(SKETCH29_3_W, SKETCH29_3_H)
        extrude(amount=-BOSS_EXTRUDE21_DEPTH)

    # Sketch30 → Boss-Extrude22 (add)
    with SkipClean():  # the faces are left unmerged after this step: merging them gives an invalid solid
        with BuildSketch(Plane.XZ.offset(8.750486925)):
            with BuildLine():
                Line((5.877828814, 23.052118272), (6.618334857, 23.052118272))
                ThreePointArc((6.618334857, 23.052118272), (6.311257945, 23.833306466), (5.877828814, 24.552118272))
                Line((5.877828814, 24.552118272), (5.877828814, 23.052118272))
            make_face()
            with BuildLine():
                Line((5.877828814, 20.187819507), (6.618334857, 20.187819507))
                ThreePointArc((6.618334857, 20.187819507), (6.311257945, 19.406631313), (5.877828814, 18.687819507))
                Line((5.877828814, 18.687819507), (5.877828814, 20.187819507))
            make_face()
            with BuildLine():
                Line((-2.222171186, 20.187819507), (-2.962677229, 20.187819507))
                ThreePointArc((-2.962677229, 20.187819507), (-2.655600317, 19.406631313), (-2.222171186, 18.687819507))
                Line((-2.222171186, 18.687819507), (-2.222171186, 20.187819507))
            make_face()
            with BuildLine():
                Line((-2.222171186, 23.052118272), (-2.962677229, 23.052118272))
                ThreePointArc((-2.962677229, 23.052118272), (-2.655600317, 23.833306466), (-2.222171186, 24.552118272))
                Line((-2.222171186, 24.552118272), (-2.222171186, 23.052118272))
            make_face()
        extrude(amount=-BOSS_EXTRUDE22_DEPTH)


solid = part.part
